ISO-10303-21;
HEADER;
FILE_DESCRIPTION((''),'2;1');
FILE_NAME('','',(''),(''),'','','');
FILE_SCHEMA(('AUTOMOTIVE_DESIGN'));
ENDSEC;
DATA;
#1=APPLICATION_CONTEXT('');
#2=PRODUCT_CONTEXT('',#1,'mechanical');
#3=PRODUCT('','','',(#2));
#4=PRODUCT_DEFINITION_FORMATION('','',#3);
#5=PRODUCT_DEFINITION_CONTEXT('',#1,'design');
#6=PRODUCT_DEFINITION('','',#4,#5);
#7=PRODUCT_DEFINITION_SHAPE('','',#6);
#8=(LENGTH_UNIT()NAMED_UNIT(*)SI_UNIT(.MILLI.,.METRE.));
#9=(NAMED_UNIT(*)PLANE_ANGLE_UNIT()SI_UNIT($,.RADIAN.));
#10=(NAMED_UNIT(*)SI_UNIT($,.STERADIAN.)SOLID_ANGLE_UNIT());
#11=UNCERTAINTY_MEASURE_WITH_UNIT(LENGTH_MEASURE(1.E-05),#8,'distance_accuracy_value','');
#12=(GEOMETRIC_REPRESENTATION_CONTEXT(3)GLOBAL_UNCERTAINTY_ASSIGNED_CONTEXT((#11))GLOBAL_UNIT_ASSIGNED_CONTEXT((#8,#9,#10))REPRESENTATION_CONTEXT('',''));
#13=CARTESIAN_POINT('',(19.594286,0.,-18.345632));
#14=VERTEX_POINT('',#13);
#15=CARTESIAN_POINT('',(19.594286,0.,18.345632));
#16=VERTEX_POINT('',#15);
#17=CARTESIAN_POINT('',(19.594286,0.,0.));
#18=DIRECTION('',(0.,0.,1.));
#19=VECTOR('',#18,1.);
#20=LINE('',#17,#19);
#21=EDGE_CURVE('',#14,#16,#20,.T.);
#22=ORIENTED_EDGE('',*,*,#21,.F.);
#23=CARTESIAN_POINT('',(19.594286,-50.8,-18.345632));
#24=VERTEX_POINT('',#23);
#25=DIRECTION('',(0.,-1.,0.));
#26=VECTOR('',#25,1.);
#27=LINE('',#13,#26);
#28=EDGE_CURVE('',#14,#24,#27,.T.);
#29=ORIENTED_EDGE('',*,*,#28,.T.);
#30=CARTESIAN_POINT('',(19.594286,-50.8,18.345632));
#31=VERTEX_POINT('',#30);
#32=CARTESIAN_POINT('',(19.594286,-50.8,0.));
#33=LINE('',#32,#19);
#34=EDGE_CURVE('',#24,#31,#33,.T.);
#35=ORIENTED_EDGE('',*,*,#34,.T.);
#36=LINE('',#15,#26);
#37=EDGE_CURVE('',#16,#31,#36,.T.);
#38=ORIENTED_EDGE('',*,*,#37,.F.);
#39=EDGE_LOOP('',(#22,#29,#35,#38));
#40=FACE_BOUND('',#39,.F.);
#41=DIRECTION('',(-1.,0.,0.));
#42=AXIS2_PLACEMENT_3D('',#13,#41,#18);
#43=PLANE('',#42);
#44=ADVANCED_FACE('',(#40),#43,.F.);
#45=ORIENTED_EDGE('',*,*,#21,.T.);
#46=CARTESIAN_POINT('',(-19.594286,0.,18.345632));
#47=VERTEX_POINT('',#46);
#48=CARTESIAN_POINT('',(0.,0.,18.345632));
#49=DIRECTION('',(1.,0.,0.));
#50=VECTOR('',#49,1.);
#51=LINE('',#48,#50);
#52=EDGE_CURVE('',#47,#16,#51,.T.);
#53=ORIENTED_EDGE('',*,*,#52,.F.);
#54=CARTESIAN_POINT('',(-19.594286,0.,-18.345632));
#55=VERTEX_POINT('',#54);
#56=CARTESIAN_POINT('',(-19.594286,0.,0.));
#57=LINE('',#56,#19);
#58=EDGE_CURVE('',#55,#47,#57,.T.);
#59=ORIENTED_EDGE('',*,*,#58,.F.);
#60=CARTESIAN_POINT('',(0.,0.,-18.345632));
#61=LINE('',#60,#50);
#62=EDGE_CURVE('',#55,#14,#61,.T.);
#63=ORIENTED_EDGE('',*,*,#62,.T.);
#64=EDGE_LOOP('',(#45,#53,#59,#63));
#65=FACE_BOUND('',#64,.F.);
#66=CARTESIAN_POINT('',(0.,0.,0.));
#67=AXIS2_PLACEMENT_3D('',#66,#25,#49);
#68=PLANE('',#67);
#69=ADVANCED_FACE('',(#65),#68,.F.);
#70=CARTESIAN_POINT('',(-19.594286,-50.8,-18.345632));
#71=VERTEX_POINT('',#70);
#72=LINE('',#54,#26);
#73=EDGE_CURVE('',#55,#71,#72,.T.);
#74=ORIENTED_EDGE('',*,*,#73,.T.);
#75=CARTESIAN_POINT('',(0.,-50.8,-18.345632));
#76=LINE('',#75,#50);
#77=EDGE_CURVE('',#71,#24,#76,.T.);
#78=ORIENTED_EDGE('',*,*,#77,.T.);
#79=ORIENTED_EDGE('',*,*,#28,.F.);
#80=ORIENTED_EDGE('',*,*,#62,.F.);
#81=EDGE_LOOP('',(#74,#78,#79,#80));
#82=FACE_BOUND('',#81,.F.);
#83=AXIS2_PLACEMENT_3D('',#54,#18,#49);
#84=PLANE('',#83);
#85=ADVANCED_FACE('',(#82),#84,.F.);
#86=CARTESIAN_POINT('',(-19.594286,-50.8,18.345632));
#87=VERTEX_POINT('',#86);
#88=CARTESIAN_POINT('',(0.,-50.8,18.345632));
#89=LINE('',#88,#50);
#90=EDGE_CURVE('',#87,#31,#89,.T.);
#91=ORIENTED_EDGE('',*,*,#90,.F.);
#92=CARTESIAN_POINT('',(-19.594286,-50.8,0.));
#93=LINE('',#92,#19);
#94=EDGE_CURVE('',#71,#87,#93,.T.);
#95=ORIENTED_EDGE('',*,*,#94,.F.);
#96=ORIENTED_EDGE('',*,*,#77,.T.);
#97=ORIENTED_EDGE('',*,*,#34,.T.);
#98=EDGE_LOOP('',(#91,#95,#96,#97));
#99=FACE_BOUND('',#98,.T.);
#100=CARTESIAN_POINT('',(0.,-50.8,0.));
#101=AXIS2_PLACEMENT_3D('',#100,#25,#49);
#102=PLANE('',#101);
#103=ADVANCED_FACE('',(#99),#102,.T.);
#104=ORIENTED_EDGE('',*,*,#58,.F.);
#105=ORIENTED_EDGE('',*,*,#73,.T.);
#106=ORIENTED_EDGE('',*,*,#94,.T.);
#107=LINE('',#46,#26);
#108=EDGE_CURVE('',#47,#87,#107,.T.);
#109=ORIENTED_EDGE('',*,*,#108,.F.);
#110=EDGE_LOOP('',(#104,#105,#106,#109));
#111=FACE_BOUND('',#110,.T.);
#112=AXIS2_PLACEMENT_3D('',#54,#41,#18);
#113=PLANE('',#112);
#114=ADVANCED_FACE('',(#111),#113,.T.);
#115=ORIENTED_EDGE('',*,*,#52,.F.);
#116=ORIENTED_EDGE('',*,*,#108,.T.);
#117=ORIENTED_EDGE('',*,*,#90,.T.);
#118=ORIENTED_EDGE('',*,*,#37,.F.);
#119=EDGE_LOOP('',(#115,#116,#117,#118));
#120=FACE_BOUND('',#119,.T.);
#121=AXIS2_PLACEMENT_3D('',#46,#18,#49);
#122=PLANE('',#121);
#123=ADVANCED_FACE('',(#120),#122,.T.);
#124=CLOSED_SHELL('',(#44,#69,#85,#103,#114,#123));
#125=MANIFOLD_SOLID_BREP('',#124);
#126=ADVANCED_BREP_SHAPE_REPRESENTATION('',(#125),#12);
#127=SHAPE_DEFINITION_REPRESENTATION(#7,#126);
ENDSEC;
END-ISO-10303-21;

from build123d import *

# Parameters (mm, degrees)
F0_W     = 39.1885712743
F0_H     = 36.6912633181
F1_DEPTH = 50.8


# Not quite as in the source:
# - a feature names something its author has since deleted; it is built from what else it names


with BuildPart() as f1:
    # F0 (on Front) → F1 (new body)
    with BuildSketch(Plane.XZ):
        Rectangle(F0_W, F0_H)
    extrude(amount=F1_DEPTH)


solid = f1.part
